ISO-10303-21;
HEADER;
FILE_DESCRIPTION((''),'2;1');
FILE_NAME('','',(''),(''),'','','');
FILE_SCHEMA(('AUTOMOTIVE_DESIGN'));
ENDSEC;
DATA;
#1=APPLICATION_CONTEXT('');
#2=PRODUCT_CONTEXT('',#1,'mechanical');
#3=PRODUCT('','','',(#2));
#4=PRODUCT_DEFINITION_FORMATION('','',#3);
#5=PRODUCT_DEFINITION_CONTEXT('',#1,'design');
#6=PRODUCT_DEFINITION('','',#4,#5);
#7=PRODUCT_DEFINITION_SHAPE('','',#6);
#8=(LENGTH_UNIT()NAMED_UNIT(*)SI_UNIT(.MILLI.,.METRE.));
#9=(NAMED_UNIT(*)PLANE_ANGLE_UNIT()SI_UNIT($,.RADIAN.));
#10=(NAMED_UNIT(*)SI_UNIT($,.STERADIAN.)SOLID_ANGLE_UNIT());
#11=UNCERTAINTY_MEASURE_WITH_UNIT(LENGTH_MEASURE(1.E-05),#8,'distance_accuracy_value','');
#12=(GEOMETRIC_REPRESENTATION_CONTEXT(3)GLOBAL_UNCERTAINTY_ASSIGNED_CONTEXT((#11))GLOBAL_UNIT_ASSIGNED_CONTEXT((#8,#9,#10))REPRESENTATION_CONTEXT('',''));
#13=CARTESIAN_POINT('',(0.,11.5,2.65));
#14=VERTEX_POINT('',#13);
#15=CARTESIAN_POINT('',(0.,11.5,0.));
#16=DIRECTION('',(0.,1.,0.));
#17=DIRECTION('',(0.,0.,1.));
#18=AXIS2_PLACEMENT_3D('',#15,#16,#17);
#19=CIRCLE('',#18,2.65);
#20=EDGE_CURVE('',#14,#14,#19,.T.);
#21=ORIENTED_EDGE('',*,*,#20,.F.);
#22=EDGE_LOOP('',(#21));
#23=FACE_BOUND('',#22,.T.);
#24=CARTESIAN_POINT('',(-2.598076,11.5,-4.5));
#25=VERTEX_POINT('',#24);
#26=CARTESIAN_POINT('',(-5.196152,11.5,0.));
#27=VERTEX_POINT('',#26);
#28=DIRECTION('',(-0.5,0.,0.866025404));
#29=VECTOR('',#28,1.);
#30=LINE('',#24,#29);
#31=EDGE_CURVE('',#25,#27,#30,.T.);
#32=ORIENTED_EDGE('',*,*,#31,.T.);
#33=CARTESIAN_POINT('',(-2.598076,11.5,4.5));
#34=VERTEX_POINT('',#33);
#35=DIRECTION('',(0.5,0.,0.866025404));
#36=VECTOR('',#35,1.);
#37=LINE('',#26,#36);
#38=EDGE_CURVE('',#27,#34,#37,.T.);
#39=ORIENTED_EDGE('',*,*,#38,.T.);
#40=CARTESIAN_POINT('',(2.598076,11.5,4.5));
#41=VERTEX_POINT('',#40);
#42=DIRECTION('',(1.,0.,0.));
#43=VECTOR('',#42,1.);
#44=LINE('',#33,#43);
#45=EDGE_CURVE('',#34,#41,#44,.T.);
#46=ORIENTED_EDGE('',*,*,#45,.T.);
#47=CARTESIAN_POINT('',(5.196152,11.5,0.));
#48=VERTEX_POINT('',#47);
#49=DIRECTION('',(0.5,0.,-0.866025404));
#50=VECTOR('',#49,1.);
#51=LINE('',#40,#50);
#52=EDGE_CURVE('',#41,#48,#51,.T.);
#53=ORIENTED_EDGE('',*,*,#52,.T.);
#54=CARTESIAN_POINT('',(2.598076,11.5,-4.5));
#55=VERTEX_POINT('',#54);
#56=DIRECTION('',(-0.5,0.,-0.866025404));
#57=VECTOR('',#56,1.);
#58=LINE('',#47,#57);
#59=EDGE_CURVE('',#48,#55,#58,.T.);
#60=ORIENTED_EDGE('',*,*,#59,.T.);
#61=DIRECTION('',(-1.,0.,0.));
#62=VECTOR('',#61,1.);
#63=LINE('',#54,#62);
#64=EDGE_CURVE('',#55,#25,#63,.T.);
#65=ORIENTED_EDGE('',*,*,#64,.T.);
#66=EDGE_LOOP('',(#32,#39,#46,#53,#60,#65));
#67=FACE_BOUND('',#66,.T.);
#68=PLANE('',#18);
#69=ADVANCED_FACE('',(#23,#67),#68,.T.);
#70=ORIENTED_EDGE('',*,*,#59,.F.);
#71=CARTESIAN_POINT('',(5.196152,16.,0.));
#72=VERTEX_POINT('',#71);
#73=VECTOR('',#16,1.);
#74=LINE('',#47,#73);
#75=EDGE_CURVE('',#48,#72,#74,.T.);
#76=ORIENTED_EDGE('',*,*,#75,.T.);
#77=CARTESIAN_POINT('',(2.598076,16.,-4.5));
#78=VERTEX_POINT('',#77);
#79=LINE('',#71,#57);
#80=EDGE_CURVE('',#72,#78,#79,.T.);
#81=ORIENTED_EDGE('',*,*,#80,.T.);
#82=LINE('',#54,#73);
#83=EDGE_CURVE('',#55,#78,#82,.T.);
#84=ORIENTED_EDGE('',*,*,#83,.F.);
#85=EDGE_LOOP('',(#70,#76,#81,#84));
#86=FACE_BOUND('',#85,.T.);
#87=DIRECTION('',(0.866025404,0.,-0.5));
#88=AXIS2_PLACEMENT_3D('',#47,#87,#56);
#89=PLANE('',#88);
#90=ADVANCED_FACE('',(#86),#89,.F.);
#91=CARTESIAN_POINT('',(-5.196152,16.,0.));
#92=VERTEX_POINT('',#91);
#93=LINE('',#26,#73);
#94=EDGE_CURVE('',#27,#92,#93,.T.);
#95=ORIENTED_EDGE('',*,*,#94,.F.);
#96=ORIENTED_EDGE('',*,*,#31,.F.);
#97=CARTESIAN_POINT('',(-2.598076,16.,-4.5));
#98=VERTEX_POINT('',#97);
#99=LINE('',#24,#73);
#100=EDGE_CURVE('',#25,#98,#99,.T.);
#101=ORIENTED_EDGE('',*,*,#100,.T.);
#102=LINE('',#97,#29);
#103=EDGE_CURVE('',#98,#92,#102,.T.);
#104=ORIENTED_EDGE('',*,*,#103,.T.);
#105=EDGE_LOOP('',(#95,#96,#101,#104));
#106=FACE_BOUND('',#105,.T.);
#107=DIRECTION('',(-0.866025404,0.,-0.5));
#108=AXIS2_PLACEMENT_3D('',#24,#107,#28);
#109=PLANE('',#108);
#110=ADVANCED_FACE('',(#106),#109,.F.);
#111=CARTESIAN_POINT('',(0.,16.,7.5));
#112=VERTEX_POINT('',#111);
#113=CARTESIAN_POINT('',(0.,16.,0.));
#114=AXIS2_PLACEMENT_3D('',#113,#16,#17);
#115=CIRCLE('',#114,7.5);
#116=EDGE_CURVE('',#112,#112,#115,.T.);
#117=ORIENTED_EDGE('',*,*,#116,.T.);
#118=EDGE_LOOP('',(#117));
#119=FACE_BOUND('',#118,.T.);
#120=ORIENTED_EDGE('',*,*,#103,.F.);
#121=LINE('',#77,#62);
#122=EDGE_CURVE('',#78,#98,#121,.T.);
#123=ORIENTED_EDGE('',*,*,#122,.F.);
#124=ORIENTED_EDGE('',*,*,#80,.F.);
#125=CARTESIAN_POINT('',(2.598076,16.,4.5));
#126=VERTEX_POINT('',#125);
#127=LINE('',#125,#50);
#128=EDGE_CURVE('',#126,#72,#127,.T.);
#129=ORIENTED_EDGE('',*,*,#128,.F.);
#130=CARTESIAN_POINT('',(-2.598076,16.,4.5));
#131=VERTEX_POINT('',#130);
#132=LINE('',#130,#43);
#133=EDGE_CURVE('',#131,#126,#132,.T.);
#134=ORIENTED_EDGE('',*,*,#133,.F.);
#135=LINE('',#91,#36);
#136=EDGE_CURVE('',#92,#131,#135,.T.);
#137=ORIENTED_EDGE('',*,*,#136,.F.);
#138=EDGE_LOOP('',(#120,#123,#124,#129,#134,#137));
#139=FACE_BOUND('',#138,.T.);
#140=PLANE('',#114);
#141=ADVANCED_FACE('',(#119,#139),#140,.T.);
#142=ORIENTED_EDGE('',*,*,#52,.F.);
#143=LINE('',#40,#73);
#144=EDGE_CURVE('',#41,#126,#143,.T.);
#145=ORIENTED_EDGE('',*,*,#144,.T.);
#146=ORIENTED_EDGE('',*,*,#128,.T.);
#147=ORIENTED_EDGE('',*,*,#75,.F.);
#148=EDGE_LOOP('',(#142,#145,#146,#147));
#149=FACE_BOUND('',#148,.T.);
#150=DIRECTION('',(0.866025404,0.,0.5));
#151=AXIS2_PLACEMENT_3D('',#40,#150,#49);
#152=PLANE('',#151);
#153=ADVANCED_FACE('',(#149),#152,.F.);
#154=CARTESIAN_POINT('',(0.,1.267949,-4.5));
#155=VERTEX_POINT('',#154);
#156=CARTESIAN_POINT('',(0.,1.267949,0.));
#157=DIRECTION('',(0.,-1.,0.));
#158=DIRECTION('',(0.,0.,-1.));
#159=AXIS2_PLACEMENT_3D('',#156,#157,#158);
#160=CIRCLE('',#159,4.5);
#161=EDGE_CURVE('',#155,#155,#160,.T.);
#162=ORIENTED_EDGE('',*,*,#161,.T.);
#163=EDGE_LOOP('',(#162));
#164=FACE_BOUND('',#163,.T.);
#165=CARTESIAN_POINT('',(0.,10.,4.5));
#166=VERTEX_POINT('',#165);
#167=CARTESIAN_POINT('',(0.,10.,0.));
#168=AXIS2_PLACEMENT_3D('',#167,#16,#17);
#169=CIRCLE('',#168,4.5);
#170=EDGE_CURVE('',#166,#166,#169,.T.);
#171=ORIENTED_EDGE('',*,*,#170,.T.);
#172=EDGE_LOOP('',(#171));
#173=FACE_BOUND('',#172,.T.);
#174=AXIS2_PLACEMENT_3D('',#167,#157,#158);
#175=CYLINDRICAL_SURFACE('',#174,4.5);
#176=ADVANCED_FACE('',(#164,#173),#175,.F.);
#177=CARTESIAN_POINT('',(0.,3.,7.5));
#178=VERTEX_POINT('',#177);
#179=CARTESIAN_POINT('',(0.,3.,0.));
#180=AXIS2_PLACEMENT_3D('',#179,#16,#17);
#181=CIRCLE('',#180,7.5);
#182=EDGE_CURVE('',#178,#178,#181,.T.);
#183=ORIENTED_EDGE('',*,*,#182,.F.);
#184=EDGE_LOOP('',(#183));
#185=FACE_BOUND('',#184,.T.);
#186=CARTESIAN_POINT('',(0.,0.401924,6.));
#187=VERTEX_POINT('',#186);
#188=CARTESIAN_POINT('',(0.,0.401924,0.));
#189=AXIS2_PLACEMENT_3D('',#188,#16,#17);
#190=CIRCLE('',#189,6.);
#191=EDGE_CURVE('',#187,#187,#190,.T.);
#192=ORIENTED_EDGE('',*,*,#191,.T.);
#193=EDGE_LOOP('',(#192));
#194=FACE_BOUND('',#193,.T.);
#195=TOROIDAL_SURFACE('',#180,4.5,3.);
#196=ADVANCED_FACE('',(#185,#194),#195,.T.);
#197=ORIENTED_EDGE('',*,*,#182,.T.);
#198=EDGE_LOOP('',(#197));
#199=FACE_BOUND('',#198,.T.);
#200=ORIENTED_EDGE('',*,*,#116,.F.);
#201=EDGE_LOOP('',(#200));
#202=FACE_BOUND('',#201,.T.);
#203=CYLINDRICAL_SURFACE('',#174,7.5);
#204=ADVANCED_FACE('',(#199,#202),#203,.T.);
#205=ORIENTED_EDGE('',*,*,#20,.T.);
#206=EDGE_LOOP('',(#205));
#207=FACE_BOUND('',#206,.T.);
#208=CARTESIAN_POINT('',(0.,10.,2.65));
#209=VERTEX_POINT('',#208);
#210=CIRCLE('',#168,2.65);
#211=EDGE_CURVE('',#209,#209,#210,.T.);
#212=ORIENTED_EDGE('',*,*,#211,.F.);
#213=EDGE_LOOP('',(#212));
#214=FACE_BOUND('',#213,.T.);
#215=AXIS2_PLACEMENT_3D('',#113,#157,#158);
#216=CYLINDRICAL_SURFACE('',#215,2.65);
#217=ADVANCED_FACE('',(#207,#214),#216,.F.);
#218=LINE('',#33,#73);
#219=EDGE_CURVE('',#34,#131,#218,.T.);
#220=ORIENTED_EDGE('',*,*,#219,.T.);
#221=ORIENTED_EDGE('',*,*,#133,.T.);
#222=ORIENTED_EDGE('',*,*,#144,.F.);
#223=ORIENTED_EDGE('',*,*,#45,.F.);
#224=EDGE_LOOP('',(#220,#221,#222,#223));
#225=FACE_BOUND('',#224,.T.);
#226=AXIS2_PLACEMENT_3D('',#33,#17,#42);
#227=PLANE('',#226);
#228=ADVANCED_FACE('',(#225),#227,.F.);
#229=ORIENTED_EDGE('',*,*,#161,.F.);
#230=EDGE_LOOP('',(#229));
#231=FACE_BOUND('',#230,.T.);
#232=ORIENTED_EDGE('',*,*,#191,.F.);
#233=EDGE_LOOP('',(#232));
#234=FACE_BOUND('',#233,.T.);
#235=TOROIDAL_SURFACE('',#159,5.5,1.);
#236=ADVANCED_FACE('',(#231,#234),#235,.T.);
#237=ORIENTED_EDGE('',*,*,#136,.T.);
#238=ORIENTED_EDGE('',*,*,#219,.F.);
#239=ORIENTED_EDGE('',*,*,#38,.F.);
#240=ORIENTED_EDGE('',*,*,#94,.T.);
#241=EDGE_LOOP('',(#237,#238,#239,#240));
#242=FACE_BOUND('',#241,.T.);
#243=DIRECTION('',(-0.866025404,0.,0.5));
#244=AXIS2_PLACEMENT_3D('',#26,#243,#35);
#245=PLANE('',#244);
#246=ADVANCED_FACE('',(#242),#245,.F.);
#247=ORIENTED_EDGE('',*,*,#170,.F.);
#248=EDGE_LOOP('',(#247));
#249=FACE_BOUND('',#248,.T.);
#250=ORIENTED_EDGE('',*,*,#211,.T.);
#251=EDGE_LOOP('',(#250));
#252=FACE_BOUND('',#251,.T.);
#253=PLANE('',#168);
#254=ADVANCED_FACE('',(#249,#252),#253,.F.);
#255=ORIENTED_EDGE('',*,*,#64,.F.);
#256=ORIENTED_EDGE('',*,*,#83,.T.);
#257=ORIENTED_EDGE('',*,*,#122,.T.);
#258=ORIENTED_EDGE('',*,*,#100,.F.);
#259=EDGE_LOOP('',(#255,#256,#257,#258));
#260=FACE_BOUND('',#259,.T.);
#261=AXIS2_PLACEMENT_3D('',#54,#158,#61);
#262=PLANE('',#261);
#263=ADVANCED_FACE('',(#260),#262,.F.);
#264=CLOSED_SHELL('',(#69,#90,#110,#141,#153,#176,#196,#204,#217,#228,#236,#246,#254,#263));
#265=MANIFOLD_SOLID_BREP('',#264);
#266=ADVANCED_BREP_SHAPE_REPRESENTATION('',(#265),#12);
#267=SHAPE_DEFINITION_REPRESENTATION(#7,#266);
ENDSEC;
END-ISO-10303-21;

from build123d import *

# Parameters (mm, degrees)
SKETCH1_R           = 7.5
SKETCH1_R_2         = 4.5
BOSS_EXTRUDE1_DEPTH = 10
SKETCH2_R           = 7.5
SKETCH2_R_2         = 2.65
BOSS_EXTRUDE2_DEPTH = 6
CUT_EXTRUDE1_DEPTH  = 4.5
FILLET1_R           = 3
FILLET2_R           = 1


with BuildPart() as part:
    # Sketch1 → Boss-Extrude1 (new body)
    with BuildSketch(Plane(origin=(0, 0, 0), x_dir=(1, 0, 0), z_dir=(0, 1, 0))):
        with Locations(Location((0, 0, 0), (0, 0, 270))):
            Circle(SKETCH1_R)
        with Locations(Location((0, 0, 0), (0, 0, 270))):
            Circle(SKETCH1_R_2, mode=Mode.SUBTRACT)
    extrude(amount=BOSS_EXTRUDE1_DEPTH)

    # Sketch2 → Boss-Extrude2 (add)
    with BuildSketch(Plane(origin=(0, 10, 0), x_dir=(1, 0, 0), z_dir=(0, 1, 0))):
        with Locations(Location((0, 0, 0), (0, 0, 270))):
            Circle(SKETCH2_R)
        with Locations(Location((0, 0, 0), (0, 0, 270))):
            Circle(SKETCH2_R_2, mode=Mode.SUBTRACT)
    extrude(amount=BOSS_EXTRUDE2_DEPTH)

    # Sketch3 → Cut-Extrude1 (cut)
    with BuildSketch(Plane(origin=(0, 16, 0), x_dir=(1, 0, 0), z_dir=(0, 1, 0))):
        Polygon((2.598076211, 4.5), (-2.598076211, 4.5), (-5.196152423, 0), (-2.598076211, -4.5), (2.598076211, -4.5), (5.196152423, 0), align=None)
    extrude(amount=-CUT_EXTRUDE1_DEPTH, mode=Mode.SUBTRACT)

    # Fillet1
    fillet1_edges = [part.edges().sort_by_distance(p)[0] for p in [
        (0, 0, -7.5),
    ]]
    fillet(fillet1_edges, radius=FILLET1_R - 0.0001)  # a hair under: the kernel refuses the full size

    # Fillet2
    fillet2_edges = [part.edges().sort_by_distance(p)[0] for p in [
        (0, 0, -4.5),
    ]]
    fillet(fillet2_edges, radius=FILLET2_R)


solid = part.part
